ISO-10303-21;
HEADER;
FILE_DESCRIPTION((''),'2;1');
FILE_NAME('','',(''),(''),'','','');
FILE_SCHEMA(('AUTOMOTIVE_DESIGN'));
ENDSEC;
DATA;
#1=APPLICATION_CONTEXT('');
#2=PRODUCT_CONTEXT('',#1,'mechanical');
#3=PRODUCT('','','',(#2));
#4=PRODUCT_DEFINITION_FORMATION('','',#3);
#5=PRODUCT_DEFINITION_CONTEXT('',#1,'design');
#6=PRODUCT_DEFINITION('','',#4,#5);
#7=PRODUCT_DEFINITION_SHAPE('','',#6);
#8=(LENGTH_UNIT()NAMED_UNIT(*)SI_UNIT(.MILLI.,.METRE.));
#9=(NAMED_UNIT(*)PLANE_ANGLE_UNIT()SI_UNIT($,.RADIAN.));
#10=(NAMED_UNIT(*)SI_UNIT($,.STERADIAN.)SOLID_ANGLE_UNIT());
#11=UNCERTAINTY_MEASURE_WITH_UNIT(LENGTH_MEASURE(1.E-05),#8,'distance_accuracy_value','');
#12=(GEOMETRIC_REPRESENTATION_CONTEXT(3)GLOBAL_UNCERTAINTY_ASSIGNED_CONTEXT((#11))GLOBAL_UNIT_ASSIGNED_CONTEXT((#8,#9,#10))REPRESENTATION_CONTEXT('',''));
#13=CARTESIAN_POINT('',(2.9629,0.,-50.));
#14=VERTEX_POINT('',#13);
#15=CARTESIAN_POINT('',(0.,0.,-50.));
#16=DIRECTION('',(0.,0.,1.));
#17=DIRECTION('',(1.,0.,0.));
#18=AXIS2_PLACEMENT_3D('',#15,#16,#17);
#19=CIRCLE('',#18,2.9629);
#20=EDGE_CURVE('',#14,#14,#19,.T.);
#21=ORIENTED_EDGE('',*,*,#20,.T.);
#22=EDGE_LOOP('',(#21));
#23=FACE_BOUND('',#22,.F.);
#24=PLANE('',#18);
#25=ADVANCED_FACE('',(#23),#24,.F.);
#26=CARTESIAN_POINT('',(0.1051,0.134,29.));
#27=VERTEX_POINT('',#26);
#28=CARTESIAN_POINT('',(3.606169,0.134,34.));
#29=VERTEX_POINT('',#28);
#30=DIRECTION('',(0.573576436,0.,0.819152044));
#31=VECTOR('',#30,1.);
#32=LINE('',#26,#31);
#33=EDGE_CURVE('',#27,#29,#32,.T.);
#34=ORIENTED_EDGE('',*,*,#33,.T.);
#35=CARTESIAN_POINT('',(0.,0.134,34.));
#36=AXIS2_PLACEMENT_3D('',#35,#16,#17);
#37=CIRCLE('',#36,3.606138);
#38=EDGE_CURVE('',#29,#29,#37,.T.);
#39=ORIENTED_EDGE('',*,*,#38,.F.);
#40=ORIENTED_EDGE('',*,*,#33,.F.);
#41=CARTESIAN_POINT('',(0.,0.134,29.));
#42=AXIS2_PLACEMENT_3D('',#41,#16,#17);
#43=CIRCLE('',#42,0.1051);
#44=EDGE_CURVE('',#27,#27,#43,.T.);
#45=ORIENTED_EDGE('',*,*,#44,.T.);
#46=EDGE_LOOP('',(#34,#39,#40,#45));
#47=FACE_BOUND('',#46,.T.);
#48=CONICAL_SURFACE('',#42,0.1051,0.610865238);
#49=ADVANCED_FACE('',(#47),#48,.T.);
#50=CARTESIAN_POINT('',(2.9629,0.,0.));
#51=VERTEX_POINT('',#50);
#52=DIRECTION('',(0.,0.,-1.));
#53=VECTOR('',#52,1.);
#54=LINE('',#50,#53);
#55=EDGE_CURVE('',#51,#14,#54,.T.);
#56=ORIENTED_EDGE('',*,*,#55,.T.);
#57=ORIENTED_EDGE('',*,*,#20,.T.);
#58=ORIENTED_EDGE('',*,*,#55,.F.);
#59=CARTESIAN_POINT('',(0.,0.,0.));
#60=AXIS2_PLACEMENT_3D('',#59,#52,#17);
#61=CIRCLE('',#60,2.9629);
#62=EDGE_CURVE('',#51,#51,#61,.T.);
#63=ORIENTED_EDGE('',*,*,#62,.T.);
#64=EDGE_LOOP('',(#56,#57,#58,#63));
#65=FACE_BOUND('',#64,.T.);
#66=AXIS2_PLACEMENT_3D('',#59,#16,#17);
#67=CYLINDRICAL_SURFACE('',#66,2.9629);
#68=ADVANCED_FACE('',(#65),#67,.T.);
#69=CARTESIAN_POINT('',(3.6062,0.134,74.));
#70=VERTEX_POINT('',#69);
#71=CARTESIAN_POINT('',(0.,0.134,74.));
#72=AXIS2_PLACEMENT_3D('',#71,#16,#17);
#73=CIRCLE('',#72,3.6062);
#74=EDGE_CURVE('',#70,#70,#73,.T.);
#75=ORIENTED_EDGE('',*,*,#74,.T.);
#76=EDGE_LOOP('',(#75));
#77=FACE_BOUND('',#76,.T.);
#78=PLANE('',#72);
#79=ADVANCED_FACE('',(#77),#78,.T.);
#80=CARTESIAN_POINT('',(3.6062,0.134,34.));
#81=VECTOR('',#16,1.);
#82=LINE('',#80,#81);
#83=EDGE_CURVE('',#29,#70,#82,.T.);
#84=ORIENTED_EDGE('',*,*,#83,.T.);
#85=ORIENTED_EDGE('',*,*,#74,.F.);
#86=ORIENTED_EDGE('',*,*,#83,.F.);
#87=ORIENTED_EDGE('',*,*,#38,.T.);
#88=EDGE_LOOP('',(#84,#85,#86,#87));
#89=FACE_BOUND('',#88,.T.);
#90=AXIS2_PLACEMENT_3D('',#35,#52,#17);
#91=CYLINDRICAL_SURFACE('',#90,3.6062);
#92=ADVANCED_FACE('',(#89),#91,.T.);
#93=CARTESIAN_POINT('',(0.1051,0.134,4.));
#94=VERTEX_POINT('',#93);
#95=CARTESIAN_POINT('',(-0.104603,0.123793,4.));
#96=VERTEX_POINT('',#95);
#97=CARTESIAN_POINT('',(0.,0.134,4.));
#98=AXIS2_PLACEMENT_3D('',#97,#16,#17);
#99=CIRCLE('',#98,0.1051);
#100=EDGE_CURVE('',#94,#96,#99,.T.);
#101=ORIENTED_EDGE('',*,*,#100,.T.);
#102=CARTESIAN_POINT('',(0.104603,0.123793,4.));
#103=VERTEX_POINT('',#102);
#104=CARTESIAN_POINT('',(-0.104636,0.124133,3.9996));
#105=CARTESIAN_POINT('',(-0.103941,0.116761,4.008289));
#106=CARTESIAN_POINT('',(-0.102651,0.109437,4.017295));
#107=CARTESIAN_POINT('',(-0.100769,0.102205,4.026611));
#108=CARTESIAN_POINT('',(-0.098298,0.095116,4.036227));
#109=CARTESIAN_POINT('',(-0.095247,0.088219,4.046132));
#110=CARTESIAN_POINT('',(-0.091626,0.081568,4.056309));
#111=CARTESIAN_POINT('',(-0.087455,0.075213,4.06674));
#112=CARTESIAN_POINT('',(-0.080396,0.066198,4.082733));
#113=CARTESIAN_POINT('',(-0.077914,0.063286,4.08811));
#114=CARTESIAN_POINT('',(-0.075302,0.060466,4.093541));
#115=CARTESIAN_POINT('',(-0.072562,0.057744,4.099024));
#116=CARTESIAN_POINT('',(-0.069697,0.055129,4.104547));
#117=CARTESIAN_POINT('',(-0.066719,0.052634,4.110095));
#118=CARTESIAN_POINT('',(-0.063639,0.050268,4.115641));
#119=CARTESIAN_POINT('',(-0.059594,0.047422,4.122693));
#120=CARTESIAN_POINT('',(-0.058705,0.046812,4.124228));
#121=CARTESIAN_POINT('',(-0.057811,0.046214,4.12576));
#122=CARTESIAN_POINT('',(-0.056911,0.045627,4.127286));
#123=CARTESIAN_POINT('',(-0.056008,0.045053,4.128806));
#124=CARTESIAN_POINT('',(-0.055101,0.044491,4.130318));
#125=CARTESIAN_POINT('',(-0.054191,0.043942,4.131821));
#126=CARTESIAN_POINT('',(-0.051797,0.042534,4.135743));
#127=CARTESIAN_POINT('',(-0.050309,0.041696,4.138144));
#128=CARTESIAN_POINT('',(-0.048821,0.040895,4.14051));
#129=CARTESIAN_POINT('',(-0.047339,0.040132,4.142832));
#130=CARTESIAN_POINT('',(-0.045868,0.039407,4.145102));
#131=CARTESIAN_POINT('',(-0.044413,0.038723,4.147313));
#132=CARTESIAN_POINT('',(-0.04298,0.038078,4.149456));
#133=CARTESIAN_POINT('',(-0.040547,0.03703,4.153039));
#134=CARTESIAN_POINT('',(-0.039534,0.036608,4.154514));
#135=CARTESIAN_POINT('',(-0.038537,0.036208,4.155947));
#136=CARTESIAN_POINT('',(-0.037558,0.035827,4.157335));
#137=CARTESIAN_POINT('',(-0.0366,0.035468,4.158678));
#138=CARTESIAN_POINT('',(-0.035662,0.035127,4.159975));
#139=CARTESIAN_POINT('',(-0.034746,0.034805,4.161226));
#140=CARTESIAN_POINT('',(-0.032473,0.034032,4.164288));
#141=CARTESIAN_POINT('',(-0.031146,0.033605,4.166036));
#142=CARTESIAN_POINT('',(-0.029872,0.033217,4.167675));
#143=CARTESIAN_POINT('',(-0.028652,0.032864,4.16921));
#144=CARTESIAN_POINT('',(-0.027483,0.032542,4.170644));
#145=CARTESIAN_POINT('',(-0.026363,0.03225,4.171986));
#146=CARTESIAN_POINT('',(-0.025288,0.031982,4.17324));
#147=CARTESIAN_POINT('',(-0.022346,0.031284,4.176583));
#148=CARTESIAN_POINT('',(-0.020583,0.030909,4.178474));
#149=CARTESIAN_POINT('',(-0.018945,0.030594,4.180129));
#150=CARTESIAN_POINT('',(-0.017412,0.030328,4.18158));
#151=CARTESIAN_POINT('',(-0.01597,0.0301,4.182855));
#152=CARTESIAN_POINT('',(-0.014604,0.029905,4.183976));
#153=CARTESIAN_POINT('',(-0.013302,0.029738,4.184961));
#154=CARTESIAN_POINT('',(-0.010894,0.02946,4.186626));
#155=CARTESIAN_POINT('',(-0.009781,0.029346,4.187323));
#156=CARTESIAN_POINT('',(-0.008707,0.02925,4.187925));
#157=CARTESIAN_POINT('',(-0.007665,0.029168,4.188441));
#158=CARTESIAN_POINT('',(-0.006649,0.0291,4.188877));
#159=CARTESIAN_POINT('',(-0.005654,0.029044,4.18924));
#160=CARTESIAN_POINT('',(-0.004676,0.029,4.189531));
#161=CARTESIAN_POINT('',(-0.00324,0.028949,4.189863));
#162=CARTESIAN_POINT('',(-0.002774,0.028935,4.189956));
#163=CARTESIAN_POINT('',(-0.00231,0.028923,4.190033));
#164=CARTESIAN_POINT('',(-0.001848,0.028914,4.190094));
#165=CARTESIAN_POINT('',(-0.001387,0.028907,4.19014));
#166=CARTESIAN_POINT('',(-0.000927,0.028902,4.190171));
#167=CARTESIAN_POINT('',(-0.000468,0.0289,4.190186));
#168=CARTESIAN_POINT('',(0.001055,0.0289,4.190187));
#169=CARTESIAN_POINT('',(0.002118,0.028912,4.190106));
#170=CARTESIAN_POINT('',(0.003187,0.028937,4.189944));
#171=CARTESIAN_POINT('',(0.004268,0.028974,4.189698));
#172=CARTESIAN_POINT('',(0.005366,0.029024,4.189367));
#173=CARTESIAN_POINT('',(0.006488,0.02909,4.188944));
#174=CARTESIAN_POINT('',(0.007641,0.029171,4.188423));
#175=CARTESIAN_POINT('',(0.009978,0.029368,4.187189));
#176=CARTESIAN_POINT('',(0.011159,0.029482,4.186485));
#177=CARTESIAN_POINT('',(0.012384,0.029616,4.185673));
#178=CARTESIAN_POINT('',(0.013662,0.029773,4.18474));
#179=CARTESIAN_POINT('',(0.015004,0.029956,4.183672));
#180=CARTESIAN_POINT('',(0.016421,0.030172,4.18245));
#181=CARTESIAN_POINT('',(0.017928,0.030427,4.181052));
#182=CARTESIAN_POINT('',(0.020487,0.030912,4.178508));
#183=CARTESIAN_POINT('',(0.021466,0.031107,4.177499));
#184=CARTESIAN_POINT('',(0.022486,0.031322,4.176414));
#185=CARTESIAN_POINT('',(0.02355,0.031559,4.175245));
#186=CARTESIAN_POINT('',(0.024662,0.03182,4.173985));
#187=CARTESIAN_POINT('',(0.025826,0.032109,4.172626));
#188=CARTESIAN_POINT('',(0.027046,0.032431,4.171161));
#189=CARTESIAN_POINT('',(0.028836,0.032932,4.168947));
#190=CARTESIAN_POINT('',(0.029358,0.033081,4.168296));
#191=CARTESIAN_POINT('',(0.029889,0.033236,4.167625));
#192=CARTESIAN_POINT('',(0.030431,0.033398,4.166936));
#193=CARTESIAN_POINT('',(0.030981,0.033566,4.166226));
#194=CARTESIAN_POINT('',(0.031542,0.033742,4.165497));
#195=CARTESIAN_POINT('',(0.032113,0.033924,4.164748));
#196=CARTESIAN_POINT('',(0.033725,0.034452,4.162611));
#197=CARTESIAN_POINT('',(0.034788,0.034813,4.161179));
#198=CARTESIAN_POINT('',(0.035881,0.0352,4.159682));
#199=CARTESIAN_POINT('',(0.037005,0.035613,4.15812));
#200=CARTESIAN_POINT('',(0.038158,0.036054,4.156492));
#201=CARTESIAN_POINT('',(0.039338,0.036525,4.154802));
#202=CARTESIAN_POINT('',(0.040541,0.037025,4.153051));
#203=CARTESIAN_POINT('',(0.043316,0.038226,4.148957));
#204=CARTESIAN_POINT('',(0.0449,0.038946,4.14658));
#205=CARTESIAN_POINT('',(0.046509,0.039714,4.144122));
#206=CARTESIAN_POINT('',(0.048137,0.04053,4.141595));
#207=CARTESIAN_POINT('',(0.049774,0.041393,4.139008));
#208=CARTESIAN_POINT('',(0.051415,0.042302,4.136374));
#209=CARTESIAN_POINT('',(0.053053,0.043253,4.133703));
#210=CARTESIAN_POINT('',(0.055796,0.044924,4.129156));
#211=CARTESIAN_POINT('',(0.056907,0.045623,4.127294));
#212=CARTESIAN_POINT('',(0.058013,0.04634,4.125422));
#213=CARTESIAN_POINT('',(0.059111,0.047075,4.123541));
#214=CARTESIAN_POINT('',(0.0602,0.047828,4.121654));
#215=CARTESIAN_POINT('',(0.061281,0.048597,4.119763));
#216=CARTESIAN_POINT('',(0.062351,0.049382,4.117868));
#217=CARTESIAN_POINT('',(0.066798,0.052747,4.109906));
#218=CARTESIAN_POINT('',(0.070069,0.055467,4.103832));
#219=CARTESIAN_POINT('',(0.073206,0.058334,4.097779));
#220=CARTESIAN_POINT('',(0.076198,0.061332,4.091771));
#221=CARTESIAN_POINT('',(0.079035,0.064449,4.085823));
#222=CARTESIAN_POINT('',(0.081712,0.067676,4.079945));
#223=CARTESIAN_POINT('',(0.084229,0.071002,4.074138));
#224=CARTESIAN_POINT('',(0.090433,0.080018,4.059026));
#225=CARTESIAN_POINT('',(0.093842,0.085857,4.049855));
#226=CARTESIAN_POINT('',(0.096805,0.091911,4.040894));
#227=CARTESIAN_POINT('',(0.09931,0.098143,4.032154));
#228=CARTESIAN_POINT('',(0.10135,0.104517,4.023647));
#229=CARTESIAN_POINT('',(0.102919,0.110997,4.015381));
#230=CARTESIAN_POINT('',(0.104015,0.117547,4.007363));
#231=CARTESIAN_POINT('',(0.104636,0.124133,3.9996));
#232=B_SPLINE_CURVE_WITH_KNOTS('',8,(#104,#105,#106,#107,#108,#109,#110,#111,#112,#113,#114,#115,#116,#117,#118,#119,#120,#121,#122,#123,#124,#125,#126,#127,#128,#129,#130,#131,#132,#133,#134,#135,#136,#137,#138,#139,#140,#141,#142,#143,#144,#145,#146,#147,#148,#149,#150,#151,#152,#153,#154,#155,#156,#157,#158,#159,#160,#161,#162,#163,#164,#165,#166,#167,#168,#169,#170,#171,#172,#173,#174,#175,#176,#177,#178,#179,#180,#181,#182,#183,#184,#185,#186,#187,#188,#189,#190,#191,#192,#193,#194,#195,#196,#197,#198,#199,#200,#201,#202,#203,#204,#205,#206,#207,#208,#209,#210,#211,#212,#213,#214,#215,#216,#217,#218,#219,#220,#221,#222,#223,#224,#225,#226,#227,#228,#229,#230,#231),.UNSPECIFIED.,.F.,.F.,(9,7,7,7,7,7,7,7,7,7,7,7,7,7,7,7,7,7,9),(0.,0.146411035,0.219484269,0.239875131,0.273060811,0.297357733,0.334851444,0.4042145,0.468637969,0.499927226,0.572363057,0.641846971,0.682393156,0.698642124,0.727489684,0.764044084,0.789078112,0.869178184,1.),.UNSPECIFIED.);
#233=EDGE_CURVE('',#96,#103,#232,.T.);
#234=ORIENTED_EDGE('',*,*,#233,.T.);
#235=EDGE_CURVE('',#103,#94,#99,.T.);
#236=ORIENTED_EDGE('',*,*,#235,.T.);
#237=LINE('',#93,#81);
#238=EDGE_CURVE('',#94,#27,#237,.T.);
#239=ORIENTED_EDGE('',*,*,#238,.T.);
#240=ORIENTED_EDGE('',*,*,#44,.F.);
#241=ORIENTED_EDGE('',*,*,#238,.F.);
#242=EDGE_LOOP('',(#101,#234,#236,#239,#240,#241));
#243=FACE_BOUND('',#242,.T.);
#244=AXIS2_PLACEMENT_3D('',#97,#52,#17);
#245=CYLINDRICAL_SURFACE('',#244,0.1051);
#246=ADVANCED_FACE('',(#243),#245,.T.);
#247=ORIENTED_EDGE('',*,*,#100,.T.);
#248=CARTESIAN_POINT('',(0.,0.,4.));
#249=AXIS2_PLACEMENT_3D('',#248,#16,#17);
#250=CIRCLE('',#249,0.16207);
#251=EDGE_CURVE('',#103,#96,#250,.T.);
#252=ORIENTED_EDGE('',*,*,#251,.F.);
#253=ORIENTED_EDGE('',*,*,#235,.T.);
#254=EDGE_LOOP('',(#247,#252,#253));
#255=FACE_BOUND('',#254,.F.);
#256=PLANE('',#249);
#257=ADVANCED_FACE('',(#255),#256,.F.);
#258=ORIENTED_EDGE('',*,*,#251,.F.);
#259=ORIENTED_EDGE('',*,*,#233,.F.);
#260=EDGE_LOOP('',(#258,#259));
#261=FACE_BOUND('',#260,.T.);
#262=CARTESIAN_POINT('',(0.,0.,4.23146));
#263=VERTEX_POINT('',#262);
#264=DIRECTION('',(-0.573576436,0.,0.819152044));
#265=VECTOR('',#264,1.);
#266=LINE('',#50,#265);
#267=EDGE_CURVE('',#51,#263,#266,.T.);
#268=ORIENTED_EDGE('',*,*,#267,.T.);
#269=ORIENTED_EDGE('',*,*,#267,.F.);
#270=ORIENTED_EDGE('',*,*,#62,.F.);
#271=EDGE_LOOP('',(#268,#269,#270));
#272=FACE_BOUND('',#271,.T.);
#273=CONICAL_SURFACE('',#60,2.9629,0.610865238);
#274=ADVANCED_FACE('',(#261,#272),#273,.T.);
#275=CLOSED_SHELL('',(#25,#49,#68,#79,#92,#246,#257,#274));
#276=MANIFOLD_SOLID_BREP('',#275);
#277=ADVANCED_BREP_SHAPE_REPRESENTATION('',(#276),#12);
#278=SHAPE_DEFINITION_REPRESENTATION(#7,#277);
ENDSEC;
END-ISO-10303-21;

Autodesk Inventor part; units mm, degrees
ref_plane "YZ Plane" through (0, 0, 0) normal (1, 0, 0) x (0, 1, 0)
ref_plane "XZ Plane" through (0, 0, 0) normal (0, 1, 0) x (-1, 0, 0)
ref_plane "XY Plane" through (0, 0, 0) normal (0, 0, 1) x (1, 0, 0)
sketch "Sketch1" plane through (0, 0, 0) normal (0, 0, 1) x (1, 0, 0)
  circle A0 centre (0, 0) radius 2.9629 projected
  point P0 (0, 0)
extrude "Extrusion1" add sketch "Sketch1" against normal blind 50
sketch "Sketch2" plane through (0, 0, 0) normal (0, 0, 1) x (1, 0, 0)
  circle A0 centre (0, 0) radius 2.9629 projected
  point P0 (0, 0)
extrude "Extrusion2" add sketch "Sketch2" along normal blind 50 draft -35
ref_plane "Work Plane1" through (0, 0, 4) normal (0, 0, 1) x (1, 0, 0)
sketch "Sketch3" plane through (0, 0, 4) normal (0, 0, 1) x (1, 0, 0)
  circle A0 centre (0, 0) radius 2.9629 projected
  circle A1 centre (0, 0.134) radius 0.1051
  point P0 (0, 0)
extrude "Extrusion3" add sketch "Sketch3" along normal blind 25 contours A1
sketch "Sketch4" plane through (0, 0.134, 29) normal (0, 0, 1) x (1, 0, 0)
  circle A0 centre (0, 0) radius 0.1051 projected
  point P0 (0, -0.134)
extrude "Extrusion4" add sketch "Sketch4" along normal blind 5 draft 35
sketch "Sketch5" plane through (0, 0.134, 34) normal (0, 0, 1) x (1, 0, 0)
  circle A0 centre (0, 0) radius 3.6062 projected
  point P0 (0, -0.134)
extrude "Extrusion5" add sketch "Sketch5" along normal blind 40
properties part number "00_Laser_coupling"
